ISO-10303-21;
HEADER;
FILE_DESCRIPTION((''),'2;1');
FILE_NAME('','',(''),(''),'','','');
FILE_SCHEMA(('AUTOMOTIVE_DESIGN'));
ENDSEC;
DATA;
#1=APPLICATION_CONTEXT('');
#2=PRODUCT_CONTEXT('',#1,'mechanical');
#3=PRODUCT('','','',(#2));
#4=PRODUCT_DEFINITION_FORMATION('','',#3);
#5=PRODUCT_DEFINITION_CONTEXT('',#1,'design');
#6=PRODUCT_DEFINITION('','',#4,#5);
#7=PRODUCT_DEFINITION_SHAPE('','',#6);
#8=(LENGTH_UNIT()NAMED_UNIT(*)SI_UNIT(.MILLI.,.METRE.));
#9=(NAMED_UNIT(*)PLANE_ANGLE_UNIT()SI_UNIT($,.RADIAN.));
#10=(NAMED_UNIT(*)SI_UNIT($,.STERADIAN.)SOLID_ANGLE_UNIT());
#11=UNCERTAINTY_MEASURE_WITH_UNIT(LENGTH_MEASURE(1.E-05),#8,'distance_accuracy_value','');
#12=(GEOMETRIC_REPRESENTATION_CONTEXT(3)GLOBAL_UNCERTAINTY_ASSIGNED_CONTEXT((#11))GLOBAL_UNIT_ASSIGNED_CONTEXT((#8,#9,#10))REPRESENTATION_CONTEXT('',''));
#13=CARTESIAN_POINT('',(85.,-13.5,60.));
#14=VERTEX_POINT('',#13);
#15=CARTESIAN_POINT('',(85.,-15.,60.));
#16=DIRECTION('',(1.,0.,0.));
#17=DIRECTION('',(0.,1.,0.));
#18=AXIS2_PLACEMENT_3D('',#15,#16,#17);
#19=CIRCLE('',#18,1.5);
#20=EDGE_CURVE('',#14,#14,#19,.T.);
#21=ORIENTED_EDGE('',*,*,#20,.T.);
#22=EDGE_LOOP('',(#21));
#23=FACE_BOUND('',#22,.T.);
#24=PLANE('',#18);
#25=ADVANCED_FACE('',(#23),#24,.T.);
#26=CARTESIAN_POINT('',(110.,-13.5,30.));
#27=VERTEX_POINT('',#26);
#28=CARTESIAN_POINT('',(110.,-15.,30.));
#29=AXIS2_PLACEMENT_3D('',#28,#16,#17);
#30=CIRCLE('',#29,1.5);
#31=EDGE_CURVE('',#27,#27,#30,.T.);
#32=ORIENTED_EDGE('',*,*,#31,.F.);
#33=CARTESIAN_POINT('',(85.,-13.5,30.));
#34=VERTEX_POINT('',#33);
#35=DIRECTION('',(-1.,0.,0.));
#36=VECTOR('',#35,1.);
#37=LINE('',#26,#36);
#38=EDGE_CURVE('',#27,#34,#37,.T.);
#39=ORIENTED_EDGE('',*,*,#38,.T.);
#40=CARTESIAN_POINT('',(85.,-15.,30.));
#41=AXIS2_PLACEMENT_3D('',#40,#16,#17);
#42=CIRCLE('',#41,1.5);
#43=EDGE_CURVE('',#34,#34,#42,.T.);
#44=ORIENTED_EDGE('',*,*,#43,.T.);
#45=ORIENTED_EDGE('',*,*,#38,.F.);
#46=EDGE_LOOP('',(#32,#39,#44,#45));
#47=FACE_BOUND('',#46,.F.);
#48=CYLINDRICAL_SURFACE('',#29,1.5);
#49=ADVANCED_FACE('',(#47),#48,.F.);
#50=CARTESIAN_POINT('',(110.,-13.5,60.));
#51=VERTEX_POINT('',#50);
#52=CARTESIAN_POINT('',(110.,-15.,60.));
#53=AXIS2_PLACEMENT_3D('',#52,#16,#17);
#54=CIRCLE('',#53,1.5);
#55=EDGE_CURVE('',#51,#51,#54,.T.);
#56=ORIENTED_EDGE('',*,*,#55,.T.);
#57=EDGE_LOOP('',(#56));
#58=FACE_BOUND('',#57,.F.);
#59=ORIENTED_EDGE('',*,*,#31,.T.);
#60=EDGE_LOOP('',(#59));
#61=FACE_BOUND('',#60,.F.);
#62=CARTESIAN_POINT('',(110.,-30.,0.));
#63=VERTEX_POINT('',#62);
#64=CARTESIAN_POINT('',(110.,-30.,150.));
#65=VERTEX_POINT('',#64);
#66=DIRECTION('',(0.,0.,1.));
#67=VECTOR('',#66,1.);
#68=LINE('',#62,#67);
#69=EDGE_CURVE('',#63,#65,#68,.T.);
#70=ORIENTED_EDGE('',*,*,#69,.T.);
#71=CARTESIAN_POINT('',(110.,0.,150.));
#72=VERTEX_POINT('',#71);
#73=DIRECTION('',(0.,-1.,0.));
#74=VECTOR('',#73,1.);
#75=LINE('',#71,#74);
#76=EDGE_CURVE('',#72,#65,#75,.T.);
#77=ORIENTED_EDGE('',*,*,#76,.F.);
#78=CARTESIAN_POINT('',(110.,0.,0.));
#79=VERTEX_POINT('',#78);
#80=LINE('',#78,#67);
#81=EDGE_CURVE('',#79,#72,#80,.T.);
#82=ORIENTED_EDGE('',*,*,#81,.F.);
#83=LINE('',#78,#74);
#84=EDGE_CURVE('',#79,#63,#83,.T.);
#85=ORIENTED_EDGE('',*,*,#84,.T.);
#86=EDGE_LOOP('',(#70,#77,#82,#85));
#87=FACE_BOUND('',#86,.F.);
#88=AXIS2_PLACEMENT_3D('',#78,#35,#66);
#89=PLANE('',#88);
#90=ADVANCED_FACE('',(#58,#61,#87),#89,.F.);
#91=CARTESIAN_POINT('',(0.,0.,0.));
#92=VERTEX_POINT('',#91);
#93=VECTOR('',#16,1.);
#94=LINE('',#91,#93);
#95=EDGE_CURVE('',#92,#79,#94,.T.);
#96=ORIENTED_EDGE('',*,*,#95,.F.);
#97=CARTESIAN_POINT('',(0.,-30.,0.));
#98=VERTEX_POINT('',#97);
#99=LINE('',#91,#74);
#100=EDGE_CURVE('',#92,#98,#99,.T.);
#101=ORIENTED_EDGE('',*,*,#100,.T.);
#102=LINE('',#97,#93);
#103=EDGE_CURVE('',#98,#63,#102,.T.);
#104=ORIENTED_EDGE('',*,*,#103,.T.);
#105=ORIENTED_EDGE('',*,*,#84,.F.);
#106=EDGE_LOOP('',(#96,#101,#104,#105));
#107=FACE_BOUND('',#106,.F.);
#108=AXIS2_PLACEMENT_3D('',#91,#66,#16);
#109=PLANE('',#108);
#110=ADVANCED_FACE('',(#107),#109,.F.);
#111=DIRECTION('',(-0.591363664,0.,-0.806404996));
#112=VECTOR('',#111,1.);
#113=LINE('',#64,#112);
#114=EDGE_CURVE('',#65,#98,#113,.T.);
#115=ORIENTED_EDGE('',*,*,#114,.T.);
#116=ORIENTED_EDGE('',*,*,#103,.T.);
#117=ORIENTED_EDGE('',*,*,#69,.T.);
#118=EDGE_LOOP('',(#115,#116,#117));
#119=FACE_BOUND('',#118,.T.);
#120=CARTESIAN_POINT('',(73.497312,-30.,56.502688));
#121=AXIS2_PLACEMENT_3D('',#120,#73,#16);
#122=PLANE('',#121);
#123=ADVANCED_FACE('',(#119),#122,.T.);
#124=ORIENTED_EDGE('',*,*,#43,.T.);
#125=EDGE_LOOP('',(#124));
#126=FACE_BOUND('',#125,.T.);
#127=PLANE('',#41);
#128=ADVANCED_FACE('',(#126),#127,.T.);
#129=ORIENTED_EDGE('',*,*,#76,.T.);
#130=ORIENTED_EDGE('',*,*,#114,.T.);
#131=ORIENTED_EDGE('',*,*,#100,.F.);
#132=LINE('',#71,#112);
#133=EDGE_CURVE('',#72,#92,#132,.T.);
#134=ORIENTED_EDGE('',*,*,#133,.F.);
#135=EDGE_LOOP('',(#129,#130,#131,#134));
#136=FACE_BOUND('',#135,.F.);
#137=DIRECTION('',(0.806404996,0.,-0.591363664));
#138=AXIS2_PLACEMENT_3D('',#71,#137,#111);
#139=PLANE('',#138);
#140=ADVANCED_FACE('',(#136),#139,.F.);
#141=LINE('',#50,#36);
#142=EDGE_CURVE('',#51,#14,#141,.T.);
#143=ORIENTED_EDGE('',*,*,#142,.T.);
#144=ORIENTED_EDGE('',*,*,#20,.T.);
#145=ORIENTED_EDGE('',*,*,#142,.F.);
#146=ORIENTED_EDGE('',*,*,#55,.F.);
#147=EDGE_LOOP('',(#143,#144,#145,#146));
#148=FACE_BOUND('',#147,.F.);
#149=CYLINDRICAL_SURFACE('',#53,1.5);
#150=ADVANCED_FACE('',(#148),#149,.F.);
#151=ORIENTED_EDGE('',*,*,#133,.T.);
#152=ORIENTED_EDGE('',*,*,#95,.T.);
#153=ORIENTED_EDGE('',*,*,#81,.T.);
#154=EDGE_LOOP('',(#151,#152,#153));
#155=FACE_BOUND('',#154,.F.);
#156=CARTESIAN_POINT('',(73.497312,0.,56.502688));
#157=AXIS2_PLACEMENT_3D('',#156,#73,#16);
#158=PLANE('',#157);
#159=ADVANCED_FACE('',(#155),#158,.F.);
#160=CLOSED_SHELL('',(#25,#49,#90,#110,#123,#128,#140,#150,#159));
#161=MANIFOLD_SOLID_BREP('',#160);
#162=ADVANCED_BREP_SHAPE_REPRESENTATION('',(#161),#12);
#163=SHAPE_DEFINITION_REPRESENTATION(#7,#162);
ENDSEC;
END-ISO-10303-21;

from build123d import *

# Parameters (mm, degrees)
F1_DEPTH = 30
F2_R     = 1.5
F3_DEPTH = 25


# Not quite as in the source:
# - a feature names something its author has since deleted; it is built from what else it names


with BuildPart() as f1:
    # F0 (on Front) → F1 (new body)
    with BuildSketch(Plane.XZ):
        Polygon((110, 150), (0, 0), (110, 0), align=None)
    extrude(amount=F1_DEPTH)

    # F2 (on face) → F3 (cut)
    with BuildSketch(Plane.YZ.offset(110)):
        with Locations((-15, 30)):
            Circle(F2_R)
        with Locations((-15, 60)):
            Circle(F2_R)
    extrude(amount=-F3_DEPTH, mode=Mode.SUBTRACT)


solid = f1.part
